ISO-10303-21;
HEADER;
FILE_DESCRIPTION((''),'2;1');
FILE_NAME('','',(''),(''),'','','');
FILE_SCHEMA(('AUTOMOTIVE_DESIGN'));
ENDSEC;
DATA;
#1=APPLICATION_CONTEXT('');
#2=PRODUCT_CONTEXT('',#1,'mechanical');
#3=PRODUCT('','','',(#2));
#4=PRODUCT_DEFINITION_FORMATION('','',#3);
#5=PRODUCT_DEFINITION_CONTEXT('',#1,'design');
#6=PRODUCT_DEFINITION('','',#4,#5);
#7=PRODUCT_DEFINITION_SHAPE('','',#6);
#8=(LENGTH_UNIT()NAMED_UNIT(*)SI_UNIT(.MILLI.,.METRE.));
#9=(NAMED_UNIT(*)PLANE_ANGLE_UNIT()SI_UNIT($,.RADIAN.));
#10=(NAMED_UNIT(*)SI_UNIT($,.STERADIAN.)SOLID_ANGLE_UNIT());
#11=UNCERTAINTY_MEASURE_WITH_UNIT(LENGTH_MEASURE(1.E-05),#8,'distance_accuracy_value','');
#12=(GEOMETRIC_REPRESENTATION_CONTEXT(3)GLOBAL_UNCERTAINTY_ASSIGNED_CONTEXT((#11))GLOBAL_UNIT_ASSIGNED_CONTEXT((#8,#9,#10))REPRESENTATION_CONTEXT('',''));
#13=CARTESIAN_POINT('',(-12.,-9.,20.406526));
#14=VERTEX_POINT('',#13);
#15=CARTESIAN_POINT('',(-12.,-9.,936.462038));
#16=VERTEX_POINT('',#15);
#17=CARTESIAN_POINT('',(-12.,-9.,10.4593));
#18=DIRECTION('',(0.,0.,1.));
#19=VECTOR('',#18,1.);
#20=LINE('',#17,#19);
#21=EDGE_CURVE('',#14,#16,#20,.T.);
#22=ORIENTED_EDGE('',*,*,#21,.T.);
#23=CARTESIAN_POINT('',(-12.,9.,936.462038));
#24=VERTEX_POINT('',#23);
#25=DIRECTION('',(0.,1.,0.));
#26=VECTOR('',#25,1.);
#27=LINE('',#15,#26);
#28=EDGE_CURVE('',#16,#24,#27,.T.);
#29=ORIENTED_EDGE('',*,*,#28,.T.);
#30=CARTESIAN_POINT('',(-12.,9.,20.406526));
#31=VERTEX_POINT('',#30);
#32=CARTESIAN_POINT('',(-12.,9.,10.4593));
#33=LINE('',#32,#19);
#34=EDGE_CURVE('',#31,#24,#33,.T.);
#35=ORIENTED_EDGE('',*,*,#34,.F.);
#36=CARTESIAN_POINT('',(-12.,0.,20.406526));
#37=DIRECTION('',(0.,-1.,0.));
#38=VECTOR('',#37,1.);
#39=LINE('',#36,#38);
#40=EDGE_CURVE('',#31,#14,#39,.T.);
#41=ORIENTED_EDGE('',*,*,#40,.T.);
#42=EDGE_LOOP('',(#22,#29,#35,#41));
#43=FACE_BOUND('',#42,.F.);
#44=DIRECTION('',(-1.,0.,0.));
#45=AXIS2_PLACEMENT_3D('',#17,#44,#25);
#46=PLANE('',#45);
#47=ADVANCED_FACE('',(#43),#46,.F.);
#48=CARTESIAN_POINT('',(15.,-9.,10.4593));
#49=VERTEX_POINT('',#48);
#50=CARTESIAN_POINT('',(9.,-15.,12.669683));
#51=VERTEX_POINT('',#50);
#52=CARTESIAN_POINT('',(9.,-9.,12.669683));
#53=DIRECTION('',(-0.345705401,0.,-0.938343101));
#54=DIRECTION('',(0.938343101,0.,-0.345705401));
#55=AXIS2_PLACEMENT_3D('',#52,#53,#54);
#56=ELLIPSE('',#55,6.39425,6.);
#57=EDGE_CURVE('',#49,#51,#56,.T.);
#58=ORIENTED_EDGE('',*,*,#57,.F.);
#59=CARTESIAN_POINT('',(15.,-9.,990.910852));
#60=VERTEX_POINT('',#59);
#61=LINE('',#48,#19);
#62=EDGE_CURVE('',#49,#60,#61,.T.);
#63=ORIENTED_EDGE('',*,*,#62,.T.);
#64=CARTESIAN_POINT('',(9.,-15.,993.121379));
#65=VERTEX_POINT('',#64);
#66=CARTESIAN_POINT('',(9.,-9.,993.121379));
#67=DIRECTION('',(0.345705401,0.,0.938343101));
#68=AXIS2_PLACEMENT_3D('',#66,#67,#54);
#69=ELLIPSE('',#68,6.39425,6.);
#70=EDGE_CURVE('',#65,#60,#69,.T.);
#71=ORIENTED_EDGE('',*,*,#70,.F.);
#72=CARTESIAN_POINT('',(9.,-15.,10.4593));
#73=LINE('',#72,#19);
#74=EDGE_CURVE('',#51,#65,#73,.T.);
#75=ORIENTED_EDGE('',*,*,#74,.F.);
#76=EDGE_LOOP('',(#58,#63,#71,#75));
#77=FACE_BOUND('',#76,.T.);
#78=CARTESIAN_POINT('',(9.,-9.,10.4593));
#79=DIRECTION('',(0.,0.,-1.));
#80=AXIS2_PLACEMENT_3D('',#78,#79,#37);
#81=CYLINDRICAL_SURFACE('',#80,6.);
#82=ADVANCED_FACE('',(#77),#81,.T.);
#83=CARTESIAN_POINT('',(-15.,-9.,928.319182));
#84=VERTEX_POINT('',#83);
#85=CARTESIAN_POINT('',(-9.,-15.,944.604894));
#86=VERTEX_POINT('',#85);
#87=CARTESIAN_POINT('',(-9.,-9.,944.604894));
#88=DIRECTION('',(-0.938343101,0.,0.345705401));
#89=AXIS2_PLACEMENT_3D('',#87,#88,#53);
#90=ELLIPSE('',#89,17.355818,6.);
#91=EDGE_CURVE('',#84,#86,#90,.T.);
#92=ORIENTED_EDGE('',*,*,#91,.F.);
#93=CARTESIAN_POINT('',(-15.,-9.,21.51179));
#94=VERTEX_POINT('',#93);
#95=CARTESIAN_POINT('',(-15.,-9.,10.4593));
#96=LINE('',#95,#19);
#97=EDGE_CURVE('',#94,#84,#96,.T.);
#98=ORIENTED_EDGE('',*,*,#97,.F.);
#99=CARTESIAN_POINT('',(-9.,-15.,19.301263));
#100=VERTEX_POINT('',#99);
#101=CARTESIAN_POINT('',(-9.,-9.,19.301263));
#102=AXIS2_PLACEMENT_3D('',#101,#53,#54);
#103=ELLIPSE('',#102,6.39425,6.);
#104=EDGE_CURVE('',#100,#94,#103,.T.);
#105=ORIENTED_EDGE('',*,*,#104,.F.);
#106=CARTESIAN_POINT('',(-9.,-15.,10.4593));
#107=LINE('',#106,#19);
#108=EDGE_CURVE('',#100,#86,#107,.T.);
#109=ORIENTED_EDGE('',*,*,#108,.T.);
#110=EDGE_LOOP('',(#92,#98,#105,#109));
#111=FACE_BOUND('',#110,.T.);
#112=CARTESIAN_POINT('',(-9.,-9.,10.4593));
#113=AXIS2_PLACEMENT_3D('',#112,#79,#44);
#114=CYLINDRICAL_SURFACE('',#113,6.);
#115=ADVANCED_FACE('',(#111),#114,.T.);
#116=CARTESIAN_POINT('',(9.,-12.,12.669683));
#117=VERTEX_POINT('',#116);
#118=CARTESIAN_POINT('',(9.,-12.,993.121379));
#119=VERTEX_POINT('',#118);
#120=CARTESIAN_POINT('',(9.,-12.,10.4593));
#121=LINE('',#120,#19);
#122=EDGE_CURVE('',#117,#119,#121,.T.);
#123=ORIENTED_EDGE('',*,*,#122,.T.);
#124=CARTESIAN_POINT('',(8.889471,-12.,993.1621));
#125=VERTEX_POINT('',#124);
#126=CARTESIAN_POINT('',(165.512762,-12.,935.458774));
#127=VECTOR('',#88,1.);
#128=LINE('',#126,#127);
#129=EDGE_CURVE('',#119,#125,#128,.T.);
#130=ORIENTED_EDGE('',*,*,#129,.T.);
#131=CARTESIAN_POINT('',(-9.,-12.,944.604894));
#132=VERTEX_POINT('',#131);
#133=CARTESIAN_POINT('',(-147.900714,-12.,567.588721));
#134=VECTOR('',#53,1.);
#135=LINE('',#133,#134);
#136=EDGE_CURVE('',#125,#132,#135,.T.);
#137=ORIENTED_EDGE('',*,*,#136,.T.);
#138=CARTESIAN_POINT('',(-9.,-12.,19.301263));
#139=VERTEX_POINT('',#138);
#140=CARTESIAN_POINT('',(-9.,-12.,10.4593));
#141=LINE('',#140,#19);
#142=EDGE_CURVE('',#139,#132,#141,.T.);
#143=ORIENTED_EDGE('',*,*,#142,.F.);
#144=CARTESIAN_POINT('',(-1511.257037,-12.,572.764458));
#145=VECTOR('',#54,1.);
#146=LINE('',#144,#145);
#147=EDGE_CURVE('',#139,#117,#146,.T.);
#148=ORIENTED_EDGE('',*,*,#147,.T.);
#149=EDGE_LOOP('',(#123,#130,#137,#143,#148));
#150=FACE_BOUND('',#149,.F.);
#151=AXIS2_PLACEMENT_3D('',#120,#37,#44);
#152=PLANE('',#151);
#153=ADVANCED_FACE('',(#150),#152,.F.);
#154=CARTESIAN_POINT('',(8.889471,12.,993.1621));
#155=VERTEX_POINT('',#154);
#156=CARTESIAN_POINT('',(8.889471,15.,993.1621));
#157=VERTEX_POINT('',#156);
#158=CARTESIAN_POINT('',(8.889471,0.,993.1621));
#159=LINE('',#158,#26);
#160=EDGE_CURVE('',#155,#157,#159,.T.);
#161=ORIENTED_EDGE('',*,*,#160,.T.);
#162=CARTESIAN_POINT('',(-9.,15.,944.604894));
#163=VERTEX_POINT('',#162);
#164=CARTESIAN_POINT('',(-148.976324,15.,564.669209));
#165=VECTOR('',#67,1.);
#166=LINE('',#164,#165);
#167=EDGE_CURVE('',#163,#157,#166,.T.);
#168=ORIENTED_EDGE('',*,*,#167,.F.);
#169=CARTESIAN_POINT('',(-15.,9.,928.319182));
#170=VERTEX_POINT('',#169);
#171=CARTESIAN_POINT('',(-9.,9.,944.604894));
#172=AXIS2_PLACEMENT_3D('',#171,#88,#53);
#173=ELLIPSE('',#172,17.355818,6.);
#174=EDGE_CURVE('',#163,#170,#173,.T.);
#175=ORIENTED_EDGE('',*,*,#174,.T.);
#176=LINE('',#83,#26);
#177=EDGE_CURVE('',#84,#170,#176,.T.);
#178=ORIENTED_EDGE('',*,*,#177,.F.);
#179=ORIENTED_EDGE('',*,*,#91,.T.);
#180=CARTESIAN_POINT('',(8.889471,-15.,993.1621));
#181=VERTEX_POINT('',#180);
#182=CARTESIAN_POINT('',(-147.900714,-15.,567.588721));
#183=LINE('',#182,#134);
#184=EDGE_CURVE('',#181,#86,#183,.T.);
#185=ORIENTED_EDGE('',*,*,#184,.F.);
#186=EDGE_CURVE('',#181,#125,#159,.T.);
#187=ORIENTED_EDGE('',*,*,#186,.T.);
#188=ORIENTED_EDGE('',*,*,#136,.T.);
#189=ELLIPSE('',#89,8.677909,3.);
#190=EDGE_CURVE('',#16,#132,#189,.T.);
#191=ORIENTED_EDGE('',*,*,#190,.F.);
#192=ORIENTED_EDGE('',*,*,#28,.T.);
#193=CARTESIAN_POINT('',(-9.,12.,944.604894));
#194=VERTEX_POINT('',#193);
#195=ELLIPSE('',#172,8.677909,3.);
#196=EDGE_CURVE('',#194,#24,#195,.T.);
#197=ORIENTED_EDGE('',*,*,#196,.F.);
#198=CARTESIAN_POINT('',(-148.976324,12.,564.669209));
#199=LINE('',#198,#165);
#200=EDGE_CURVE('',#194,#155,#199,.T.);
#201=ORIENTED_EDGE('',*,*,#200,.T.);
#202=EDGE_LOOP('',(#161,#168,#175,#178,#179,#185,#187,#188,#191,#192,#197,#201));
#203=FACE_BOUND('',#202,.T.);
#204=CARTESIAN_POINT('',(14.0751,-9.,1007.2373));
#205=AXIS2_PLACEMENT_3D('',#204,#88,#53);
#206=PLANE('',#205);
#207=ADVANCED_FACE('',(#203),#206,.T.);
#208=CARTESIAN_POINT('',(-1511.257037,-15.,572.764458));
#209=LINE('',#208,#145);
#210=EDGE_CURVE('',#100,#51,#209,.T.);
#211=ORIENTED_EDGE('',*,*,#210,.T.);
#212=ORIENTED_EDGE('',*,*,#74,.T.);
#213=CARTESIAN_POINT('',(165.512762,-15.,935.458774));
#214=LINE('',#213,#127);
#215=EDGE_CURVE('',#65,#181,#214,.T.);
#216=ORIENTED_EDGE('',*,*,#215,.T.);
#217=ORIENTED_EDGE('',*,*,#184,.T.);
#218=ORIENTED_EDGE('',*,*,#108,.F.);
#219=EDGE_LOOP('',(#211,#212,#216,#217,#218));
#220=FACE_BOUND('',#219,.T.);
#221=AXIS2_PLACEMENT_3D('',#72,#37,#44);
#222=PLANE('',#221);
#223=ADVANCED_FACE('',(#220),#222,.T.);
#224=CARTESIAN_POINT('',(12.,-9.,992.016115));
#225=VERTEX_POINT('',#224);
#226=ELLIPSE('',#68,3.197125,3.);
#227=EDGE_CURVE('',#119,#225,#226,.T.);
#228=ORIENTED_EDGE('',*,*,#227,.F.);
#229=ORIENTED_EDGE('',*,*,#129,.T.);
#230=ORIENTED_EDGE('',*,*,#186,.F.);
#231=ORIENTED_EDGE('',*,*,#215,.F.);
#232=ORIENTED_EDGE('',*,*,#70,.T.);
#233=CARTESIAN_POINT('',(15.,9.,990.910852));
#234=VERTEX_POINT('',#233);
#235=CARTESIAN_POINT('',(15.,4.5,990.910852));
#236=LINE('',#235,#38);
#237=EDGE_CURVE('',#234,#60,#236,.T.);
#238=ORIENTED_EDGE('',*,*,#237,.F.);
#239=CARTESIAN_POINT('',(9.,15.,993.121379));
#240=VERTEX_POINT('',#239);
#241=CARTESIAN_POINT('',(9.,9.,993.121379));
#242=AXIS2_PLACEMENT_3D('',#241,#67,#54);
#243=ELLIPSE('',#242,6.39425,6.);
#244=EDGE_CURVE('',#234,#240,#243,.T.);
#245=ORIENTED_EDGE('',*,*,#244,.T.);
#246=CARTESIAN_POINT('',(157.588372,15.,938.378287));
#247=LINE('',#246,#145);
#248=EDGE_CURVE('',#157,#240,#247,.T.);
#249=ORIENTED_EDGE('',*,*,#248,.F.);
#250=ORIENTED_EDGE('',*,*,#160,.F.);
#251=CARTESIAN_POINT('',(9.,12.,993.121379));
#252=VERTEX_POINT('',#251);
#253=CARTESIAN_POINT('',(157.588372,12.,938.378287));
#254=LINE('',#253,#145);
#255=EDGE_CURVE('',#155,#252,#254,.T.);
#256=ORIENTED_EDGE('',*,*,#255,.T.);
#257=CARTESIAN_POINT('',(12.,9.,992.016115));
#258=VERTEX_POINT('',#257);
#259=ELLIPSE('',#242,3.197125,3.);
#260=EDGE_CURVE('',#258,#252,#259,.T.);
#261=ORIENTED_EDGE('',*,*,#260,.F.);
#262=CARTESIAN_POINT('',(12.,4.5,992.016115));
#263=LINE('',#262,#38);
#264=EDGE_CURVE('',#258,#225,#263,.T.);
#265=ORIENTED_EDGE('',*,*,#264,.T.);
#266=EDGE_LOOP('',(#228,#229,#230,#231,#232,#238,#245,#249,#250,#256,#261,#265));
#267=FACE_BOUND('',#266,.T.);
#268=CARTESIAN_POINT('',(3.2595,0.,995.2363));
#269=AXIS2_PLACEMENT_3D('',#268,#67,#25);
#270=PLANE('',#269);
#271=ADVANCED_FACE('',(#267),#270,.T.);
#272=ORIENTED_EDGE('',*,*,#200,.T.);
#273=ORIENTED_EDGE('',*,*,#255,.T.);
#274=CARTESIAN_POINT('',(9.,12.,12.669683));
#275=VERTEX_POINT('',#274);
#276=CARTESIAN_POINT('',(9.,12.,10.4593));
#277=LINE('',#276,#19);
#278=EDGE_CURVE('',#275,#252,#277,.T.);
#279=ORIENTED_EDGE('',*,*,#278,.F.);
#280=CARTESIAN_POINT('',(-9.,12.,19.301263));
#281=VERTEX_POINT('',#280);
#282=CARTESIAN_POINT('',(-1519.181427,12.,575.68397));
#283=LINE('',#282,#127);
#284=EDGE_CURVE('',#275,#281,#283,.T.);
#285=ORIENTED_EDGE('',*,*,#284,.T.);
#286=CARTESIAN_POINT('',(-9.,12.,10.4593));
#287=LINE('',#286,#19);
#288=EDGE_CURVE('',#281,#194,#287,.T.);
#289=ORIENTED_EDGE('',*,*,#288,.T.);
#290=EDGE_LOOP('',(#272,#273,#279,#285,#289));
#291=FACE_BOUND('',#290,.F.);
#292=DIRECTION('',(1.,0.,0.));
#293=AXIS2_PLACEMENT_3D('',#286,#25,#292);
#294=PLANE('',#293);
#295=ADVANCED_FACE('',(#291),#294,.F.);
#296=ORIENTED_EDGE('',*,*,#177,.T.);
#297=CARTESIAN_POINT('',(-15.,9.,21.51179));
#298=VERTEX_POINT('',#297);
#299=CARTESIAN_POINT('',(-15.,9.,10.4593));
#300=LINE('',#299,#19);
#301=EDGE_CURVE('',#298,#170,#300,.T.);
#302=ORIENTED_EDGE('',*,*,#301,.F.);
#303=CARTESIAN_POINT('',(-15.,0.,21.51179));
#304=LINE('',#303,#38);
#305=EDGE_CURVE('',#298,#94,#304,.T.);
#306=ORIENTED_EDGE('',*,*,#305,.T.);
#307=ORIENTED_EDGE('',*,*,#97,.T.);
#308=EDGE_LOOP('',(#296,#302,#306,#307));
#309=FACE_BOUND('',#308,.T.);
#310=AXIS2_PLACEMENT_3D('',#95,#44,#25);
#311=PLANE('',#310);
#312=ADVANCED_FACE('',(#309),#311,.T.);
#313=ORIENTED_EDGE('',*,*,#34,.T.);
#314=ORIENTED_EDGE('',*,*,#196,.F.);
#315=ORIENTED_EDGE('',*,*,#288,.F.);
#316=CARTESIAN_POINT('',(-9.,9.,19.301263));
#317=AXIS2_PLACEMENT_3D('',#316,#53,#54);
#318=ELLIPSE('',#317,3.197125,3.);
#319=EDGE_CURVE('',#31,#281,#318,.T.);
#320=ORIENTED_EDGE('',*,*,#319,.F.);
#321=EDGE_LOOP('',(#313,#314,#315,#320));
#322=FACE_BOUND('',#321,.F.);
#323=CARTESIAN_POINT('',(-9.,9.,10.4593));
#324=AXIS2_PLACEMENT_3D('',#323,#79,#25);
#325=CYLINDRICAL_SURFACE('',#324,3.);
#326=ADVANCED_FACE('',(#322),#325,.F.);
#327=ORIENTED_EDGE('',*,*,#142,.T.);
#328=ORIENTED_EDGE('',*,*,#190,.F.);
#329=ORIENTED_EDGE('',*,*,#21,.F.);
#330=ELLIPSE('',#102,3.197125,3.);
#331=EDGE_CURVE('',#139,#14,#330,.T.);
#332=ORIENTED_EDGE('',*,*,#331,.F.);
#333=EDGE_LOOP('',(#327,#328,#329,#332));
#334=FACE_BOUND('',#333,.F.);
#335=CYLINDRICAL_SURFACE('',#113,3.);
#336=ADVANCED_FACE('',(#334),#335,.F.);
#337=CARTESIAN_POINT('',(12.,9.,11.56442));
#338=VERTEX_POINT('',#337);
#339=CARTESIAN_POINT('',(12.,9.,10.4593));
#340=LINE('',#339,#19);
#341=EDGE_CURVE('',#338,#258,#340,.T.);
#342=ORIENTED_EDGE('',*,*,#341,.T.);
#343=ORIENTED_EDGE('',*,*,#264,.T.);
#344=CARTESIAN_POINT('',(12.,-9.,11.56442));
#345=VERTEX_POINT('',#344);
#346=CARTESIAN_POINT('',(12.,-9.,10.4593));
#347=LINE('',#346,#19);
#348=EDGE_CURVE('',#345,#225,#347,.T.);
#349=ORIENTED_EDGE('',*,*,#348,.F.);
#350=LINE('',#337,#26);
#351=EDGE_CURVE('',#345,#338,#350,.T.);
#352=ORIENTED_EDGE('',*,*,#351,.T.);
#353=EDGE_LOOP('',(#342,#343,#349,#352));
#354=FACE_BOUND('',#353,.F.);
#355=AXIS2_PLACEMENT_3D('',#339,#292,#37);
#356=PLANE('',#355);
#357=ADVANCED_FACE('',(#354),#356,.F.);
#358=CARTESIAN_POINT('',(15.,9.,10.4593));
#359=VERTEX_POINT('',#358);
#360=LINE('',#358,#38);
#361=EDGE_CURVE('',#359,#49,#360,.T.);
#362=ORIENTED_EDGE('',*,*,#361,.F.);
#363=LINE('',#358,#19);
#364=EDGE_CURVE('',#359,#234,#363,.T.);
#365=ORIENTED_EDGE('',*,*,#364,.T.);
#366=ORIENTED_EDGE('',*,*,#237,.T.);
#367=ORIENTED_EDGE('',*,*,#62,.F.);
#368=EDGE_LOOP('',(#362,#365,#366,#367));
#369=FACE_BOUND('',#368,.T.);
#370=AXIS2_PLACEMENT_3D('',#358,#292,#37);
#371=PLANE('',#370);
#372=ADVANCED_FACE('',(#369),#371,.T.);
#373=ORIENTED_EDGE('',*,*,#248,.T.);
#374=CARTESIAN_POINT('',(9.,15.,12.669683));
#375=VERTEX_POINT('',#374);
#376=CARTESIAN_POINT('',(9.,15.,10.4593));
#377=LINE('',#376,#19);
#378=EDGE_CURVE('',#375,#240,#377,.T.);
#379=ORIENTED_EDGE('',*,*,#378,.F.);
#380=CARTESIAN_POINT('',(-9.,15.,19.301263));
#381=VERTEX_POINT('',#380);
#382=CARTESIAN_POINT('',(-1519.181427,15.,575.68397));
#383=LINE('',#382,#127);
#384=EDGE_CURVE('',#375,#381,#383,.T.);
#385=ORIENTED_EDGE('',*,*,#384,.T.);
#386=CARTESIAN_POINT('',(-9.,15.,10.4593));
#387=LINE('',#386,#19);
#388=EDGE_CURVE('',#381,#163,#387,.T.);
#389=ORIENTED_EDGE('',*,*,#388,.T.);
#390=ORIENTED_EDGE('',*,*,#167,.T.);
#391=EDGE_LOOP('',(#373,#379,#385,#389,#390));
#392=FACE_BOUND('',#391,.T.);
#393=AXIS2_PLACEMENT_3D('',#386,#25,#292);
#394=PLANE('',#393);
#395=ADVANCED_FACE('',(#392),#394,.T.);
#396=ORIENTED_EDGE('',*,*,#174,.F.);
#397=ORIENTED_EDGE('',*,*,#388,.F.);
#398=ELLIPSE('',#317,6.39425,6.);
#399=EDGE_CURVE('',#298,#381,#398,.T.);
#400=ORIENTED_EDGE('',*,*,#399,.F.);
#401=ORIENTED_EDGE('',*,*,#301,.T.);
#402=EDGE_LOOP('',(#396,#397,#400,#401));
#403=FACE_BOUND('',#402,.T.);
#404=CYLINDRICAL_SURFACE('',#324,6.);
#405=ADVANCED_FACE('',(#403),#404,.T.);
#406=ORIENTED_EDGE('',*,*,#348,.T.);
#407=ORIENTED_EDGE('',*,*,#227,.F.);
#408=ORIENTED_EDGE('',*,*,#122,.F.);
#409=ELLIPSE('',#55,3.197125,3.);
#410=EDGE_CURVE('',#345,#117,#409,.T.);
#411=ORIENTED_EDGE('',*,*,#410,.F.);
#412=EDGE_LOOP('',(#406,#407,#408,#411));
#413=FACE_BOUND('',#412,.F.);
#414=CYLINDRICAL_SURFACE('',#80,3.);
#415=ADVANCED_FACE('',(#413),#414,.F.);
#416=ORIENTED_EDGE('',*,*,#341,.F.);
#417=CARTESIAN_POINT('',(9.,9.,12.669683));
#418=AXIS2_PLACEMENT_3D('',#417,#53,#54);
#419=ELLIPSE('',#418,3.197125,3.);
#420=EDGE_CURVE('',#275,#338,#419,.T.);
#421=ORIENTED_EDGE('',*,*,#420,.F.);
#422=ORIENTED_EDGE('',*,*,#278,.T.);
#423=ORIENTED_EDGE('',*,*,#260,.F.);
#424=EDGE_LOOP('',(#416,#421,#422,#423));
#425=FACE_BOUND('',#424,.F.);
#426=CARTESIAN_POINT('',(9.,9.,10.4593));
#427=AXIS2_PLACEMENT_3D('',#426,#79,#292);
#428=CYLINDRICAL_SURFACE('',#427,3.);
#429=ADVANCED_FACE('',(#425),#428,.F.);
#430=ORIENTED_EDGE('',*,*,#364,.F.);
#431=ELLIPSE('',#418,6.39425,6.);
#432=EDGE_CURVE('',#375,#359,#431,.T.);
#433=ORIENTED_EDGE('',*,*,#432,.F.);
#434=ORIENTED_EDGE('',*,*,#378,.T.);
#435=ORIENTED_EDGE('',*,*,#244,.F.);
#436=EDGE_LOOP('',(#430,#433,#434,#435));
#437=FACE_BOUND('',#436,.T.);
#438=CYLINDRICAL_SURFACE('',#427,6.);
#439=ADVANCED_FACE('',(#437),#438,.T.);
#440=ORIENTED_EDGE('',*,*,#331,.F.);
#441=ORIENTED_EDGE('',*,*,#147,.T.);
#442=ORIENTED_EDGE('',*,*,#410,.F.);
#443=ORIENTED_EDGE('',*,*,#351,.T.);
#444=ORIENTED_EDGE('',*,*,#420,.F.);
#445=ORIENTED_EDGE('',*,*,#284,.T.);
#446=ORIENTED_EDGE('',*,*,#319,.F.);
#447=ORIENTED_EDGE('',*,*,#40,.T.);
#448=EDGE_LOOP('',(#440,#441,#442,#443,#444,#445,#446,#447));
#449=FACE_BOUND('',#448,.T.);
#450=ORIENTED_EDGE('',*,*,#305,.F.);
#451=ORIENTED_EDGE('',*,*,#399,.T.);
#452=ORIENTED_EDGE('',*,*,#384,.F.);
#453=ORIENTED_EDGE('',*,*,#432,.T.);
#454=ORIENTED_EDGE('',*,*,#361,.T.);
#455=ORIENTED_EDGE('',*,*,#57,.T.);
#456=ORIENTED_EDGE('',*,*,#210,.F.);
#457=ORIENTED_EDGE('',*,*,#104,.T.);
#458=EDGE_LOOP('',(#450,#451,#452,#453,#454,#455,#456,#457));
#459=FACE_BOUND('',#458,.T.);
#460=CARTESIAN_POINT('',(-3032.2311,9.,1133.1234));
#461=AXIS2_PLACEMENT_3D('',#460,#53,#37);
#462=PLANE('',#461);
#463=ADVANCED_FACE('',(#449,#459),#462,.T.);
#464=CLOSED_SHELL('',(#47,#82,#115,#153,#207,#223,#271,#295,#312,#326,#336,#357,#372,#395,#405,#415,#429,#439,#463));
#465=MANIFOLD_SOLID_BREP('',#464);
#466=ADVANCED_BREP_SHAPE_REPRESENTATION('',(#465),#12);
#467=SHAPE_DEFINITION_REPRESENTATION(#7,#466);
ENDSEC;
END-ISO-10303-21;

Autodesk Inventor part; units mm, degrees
ref_plane "Start Plane" through (0, 0, 10.4593) normal (0, 0, 1) x (1, 0, 0)
ref_plane "End Plane" through (0, 0, 993.1621) normal (0, 0, 1) x (1, 0, 0)
sketch "Sketch" plane through (0, 0, 0) normal (0, 0, 1) x (1, 0, 0)
  line L0 (-15, -9) -> (-15, 9)
  line L1 (-9, 15) -> (9, 15)
  line L2 (15, 9) -> (15, -9)
  line L3 (9, -15) -> (-9, -15)
  arc A0 (-15, -9) -> (-9, -15) centre (-9, -9) ccw
  arc A1 (-9, 15) -> (-15, 9) centre (-9, 9) ccw
  arc A2 (15, 9) -> (9, 15) centre (9, 9) ccw
  arc A3 (9, -15) -> (15, -9) centre (9, -9) ccw
  arc A4 (-9, 12) -> (-12, 9) centre (-9, 9) ccw
  line L4 (-9, 12) -> (9, 12)
  arc A5 (12, 9) -> (9, 12) centre (9, 9) ccw
  line L5 (12, 9) -> (12, -9)
  arc A6 (9, -12) -> (12, -9) centre (9, -9) ccw
  line L6 (9, -12) -> (-9, -12)
  arc A7 (-12, -9) -> (-9, -12) centre (-9, -9) ccw
  line L7 (-12, -9) -> (-12, 9)
  line L8 (0, 22.7397) -> (0, -22.7397) construction
  line L9 (-22.7397, 0) -> (22.7397, 0) construction
  dimension "d7" = 6
  dimension "d10" = 30
  dimension "d11" = 30
  dimension "d12" = 3
  dimension "d15" = 15
  dimension "d16" = 15
extrude "Body" add sketch "Sketch" along normal up to surface (982.7028 mm away) from surface at 10.4593
sketch "Sketch3" plane through (0, 0, 0) normal (0, 0, 1) x (1, 0, 0)
  line L0 (0, 0) -> (10, 0)
ref_plane "Work Plane3" through (0, 0, 0) normal (0, -1, 0) x (1, 0, 0)
ref_plane "Work Plane4" through (-3032.2311, 9, 1133.1234) normal (-0.3457054, 0, -0.9383431) x (-0.9383431, 0, 0.3457054)
split "Split1" plane through (-3032.2311, 9, 1133.1234) removes the side toward (-0.3457054, 0, -0.9383431)
ref_plane "Work Plane5" through (3.2595, 0, 995.2363) normal (0.3457054, 0, 0.9383431) x (0.9383431, 0, -0.3457054)
split "Split2" plane through (3.2595, 0, 995.2363) removes the side toward (0.3457054, 0, 0.9383431)
ref_plane "Work Plane6" through (14.0751, -9, 1007.2373) normal (-0.9383431, 0, 0.3457054) x (0.3457054, 0, 0.9383431)
split "Split3" plane through (14.0751, -9, 1007.2373) removes the side toward (-0.9383431, 0, 0.3457054)
sketch "Sketch4" plane through (0, 0, 0) normal (0, -1, 0) x (1, 0, 0)
  line L0 (-2, 10.4593) -> (12, 10.4593) projected
  line L1 (-2, 993.1621) -> (12, 993.1621) projected
  dimension "d18" = 982.7028
equation "\"d7\" = G_IR"
equation "\"d10\" = G_H"
equation "\"d11\" = G_W"
equation "\"d12\" = G_T"
equation "\"d15\" = 0.5 * d10"
equation "\"d16\" = 0.5 * d11"
equation "\"d3\" = G_L"
equation "\"G_W\" = 30"
equation "\"G_H\" = 30"
equation "\"G_T\" = 3"
equation "\"G_IR\" = 6"
equation "\"G_L\" = d18"
equation "\"G_OFFSET_START\" = -10.45931"
equation "\"G_OFFSET_END\" = -19.26073"
equation "\"d13\" = -G_OFFSET_START"
equation "\"d14\" = G_OFFSET_END + B_L"
equation "\"B_L\" = 1012.42284"
properties part number "DIN EN 10219-2 - 30 x 30 x 3  - 982.7" material "Steel, Mild"
